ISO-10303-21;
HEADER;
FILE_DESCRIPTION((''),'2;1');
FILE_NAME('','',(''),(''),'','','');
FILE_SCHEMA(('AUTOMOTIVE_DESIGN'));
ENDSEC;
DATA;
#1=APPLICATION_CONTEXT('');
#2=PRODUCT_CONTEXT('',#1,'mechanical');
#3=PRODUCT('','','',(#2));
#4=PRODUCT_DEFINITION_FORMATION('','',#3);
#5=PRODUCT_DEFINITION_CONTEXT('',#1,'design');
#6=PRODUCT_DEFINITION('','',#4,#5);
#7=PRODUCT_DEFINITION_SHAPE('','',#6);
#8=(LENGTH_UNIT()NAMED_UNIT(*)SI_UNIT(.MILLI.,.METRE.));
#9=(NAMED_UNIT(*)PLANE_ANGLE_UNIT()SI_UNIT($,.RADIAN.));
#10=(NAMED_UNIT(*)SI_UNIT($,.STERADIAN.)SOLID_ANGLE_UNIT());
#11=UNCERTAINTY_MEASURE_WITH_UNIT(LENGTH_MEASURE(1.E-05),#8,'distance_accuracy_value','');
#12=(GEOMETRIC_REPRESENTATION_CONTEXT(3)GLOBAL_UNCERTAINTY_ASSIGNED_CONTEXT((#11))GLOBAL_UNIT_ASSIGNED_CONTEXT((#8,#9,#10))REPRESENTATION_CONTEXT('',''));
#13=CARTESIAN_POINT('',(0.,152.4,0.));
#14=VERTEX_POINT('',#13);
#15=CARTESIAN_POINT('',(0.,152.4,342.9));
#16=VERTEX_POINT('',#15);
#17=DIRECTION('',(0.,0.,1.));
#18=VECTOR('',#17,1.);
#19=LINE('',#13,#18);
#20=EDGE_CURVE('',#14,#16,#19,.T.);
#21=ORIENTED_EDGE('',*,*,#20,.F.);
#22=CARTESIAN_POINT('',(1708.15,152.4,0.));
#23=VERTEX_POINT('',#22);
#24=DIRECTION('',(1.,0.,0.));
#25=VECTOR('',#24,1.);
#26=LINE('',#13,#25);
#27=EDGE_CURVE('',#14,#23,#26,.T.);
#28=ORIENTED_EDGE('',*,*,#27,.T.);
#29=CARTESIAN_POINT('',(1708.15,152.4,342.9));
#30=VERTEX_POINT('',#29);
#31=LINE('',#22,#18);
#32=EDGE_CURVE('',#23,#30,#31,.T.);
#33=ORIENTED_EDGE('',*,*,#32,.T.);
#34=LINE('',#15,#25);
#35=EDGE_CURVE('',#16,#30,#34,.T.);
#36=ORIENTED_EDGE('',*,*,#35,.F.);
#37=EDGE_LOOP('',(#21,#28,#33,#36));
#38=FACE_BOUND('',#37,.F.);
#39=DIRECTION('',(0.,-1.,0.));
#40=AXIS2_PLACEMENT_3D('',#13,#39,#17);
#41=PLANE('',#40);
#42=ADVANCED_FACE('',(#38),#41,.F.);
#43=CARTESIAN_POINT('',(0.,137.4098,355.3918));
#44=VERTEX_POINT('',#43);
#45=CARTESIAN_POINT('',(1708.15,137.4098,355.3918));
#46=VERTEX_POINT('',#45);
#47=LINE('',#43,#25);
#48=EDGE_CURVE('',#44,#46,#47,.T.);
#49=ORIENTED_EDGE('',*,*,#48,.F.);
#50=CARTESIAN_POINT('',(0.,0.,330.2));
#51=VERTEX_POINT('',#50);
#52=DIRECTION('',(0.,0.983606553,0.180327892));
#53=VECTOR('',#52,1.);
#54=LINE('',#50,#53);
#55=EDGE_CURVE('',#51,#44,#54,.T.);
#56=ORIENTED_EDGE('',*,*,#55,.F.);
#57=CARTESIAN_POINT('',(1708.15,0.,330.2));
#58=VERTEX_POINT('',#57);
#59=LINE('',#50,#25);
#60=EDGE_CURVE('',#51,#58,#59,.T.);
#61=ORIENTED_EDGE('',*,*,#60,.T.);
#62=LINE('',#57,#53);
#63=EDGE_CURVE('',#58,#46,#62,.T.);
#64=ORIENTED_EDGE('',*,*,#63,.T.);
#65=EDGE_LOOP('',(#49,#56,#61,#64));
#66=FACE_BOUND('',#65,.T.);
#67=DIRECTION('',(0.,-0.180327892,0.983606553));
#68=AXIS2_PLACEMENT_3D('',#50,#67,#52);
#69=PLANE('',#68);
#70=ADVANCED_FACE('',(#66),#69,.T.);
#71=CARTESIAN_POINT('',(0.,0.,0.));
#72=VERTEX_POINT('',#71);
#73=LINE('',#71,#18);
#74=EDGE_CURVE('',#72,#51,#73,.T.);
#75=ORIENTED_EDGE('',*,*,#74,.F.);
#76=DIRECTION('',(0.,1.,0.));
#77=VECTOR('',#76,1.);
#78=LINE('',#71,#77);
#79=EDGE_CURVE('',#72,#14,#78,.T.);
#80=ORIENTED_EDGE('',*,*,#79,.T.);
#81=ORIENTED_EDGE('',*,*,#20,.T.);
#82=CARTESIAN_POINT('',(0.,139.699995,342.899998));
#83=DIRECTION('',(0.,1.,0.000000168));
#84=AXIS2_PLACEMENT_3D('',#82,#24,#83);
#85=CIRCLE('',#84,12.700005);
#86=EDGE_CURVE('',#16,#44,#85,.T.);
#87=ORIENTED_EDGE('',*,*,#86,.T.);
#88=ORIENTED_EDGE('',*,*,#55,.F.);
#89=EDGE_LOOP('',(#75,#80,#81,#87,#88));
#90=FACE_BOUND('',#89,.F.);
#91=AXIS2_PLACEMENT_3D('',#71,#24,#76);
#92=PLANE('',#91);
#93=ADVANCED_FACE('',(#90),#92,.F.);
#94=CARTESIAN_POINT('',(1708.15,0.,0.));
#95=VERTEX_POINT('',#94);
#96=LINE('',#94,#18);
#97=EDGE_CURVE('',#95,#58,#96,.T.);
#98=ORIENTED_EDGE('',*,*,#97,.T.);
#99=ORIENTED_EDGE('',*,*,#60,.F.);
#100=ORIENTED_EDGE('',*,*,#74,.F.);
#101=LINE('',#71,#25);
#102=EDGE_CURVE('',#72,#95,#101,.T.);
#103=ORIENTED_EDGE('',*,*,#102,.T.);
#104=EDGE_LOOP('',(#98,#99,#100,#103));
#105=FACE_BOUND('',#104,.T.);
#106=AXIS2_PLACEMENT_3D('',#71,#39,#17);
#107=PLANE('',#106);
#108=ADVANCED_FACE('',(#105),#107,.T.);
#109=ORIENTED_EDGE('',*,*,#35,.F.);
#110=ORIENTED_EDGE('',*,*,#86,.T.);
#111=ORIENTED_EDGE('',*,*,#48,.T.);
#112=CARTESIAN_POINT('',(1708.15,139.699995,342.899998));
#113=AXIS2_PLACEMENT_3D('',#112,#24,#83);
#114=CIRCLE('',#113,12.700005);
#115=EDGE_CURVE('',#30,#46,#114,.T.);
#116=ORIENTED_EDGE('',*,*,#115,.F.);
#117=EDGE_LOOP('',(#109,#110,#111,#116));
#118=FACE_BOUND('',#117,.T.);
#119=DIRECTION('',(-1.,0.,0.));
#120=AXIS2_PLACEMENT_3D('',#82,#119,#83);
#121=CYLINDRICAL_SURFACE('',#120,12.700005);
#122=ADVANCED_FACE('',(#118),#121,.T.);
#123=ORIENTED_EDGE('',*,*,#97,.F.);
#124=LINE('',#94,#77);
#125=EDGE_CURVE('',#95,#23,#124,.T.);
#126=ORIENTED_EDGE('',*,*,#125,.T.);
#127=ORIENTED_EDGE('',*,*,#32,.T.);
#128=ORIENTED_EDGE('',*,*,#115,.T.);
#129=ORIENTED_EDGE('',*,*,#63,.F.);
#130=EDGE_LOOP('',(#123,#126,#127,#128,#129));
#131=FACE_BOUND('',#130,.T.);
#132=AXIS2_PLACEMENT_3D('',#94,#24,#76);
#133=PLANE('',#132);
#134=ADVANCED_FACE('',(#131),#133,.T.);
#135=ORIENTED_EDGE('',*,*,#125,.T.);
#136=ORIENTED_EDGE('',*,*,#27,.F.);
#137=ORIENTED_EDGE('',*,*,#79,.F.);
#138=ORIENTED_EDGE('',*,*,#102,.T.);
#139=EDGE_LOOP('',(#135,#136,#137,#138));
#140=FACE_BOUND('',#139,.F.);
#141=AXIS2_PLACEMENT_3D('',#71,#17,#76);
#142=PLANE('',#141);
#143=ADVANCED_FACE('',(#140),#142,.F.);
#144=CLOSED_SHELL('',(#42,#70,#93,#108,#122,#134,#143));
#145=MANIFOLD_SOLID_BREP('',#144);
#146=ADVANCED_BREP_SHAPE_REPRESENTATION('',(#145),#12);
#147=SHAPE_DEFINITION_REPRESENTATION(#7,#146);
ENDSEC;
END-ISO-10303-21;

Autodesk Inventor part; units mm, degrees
ref_plane "YZ Plane" through (0, 0, 0) normal (1, 0, 0) x (0, 1, 0)
ref_plane "XZ Plane" through (0, 0, 0) normal (0, 1, 0) x (-1, 0, 0)
ref_plane "XY Plane" through (0, 0, 0) normal (0, 0, 1) x (1, 0, 0)
sketch "Profile" plane through (0, 0, 0) normal (0, 0, 1) x (1, 0, 0)
  line L0 (0, 0) -> (0, 330.2)
  line L1 (0, 0) -> (152.4, 0)
  line L2 (152.4, 0) -> (152.4, 342.9)
  line L3 (152.4, 342.9) -> (139.7, 342.9) construction
  line L4 (152.4, 342.9) -> (139.7, 342.9) construction
  arc A0 (152.4, 342.9) -> (137.4098, 355.3918) centre (139.7, 342.9) ccw
  line L5 (0, 330.2) -> (137.4098, 355.3918)
  dimension "d0" = 330.2
  dimension "d1" = 152.4
  dimension "d2" = 342.9
  dimension "d3" = 12.7
  dimension "d4" = 12.7
sketch "Sketch1" plane through (0, 0, 0) normal (1, 0, 0) x (0, 1, 0)
  line L0 (0, 0) -> (0, 330.2)
  line L1 (0, 0) -> (152.4, 0)
  line L2 (152.4, 0) -> (152.4, 342.9)
  line L3 (152.4, 342.9) -> (139.7, 342.9) construction
  line L4 (152.4, 342.9) -> (139.7, 342.9) construction
  arc A0 (152.4, 342.9) -> (137.4098, 355.3918) centre (139.7, 342.9) ccw
  line L5 (0, 330.2) -> (137.4098, 355.3918)
extrude "Extrusion1" add sketch "Sketch1" along normal blind 1708.15
properties part number "H" material "Granite, Cut, Polished"
